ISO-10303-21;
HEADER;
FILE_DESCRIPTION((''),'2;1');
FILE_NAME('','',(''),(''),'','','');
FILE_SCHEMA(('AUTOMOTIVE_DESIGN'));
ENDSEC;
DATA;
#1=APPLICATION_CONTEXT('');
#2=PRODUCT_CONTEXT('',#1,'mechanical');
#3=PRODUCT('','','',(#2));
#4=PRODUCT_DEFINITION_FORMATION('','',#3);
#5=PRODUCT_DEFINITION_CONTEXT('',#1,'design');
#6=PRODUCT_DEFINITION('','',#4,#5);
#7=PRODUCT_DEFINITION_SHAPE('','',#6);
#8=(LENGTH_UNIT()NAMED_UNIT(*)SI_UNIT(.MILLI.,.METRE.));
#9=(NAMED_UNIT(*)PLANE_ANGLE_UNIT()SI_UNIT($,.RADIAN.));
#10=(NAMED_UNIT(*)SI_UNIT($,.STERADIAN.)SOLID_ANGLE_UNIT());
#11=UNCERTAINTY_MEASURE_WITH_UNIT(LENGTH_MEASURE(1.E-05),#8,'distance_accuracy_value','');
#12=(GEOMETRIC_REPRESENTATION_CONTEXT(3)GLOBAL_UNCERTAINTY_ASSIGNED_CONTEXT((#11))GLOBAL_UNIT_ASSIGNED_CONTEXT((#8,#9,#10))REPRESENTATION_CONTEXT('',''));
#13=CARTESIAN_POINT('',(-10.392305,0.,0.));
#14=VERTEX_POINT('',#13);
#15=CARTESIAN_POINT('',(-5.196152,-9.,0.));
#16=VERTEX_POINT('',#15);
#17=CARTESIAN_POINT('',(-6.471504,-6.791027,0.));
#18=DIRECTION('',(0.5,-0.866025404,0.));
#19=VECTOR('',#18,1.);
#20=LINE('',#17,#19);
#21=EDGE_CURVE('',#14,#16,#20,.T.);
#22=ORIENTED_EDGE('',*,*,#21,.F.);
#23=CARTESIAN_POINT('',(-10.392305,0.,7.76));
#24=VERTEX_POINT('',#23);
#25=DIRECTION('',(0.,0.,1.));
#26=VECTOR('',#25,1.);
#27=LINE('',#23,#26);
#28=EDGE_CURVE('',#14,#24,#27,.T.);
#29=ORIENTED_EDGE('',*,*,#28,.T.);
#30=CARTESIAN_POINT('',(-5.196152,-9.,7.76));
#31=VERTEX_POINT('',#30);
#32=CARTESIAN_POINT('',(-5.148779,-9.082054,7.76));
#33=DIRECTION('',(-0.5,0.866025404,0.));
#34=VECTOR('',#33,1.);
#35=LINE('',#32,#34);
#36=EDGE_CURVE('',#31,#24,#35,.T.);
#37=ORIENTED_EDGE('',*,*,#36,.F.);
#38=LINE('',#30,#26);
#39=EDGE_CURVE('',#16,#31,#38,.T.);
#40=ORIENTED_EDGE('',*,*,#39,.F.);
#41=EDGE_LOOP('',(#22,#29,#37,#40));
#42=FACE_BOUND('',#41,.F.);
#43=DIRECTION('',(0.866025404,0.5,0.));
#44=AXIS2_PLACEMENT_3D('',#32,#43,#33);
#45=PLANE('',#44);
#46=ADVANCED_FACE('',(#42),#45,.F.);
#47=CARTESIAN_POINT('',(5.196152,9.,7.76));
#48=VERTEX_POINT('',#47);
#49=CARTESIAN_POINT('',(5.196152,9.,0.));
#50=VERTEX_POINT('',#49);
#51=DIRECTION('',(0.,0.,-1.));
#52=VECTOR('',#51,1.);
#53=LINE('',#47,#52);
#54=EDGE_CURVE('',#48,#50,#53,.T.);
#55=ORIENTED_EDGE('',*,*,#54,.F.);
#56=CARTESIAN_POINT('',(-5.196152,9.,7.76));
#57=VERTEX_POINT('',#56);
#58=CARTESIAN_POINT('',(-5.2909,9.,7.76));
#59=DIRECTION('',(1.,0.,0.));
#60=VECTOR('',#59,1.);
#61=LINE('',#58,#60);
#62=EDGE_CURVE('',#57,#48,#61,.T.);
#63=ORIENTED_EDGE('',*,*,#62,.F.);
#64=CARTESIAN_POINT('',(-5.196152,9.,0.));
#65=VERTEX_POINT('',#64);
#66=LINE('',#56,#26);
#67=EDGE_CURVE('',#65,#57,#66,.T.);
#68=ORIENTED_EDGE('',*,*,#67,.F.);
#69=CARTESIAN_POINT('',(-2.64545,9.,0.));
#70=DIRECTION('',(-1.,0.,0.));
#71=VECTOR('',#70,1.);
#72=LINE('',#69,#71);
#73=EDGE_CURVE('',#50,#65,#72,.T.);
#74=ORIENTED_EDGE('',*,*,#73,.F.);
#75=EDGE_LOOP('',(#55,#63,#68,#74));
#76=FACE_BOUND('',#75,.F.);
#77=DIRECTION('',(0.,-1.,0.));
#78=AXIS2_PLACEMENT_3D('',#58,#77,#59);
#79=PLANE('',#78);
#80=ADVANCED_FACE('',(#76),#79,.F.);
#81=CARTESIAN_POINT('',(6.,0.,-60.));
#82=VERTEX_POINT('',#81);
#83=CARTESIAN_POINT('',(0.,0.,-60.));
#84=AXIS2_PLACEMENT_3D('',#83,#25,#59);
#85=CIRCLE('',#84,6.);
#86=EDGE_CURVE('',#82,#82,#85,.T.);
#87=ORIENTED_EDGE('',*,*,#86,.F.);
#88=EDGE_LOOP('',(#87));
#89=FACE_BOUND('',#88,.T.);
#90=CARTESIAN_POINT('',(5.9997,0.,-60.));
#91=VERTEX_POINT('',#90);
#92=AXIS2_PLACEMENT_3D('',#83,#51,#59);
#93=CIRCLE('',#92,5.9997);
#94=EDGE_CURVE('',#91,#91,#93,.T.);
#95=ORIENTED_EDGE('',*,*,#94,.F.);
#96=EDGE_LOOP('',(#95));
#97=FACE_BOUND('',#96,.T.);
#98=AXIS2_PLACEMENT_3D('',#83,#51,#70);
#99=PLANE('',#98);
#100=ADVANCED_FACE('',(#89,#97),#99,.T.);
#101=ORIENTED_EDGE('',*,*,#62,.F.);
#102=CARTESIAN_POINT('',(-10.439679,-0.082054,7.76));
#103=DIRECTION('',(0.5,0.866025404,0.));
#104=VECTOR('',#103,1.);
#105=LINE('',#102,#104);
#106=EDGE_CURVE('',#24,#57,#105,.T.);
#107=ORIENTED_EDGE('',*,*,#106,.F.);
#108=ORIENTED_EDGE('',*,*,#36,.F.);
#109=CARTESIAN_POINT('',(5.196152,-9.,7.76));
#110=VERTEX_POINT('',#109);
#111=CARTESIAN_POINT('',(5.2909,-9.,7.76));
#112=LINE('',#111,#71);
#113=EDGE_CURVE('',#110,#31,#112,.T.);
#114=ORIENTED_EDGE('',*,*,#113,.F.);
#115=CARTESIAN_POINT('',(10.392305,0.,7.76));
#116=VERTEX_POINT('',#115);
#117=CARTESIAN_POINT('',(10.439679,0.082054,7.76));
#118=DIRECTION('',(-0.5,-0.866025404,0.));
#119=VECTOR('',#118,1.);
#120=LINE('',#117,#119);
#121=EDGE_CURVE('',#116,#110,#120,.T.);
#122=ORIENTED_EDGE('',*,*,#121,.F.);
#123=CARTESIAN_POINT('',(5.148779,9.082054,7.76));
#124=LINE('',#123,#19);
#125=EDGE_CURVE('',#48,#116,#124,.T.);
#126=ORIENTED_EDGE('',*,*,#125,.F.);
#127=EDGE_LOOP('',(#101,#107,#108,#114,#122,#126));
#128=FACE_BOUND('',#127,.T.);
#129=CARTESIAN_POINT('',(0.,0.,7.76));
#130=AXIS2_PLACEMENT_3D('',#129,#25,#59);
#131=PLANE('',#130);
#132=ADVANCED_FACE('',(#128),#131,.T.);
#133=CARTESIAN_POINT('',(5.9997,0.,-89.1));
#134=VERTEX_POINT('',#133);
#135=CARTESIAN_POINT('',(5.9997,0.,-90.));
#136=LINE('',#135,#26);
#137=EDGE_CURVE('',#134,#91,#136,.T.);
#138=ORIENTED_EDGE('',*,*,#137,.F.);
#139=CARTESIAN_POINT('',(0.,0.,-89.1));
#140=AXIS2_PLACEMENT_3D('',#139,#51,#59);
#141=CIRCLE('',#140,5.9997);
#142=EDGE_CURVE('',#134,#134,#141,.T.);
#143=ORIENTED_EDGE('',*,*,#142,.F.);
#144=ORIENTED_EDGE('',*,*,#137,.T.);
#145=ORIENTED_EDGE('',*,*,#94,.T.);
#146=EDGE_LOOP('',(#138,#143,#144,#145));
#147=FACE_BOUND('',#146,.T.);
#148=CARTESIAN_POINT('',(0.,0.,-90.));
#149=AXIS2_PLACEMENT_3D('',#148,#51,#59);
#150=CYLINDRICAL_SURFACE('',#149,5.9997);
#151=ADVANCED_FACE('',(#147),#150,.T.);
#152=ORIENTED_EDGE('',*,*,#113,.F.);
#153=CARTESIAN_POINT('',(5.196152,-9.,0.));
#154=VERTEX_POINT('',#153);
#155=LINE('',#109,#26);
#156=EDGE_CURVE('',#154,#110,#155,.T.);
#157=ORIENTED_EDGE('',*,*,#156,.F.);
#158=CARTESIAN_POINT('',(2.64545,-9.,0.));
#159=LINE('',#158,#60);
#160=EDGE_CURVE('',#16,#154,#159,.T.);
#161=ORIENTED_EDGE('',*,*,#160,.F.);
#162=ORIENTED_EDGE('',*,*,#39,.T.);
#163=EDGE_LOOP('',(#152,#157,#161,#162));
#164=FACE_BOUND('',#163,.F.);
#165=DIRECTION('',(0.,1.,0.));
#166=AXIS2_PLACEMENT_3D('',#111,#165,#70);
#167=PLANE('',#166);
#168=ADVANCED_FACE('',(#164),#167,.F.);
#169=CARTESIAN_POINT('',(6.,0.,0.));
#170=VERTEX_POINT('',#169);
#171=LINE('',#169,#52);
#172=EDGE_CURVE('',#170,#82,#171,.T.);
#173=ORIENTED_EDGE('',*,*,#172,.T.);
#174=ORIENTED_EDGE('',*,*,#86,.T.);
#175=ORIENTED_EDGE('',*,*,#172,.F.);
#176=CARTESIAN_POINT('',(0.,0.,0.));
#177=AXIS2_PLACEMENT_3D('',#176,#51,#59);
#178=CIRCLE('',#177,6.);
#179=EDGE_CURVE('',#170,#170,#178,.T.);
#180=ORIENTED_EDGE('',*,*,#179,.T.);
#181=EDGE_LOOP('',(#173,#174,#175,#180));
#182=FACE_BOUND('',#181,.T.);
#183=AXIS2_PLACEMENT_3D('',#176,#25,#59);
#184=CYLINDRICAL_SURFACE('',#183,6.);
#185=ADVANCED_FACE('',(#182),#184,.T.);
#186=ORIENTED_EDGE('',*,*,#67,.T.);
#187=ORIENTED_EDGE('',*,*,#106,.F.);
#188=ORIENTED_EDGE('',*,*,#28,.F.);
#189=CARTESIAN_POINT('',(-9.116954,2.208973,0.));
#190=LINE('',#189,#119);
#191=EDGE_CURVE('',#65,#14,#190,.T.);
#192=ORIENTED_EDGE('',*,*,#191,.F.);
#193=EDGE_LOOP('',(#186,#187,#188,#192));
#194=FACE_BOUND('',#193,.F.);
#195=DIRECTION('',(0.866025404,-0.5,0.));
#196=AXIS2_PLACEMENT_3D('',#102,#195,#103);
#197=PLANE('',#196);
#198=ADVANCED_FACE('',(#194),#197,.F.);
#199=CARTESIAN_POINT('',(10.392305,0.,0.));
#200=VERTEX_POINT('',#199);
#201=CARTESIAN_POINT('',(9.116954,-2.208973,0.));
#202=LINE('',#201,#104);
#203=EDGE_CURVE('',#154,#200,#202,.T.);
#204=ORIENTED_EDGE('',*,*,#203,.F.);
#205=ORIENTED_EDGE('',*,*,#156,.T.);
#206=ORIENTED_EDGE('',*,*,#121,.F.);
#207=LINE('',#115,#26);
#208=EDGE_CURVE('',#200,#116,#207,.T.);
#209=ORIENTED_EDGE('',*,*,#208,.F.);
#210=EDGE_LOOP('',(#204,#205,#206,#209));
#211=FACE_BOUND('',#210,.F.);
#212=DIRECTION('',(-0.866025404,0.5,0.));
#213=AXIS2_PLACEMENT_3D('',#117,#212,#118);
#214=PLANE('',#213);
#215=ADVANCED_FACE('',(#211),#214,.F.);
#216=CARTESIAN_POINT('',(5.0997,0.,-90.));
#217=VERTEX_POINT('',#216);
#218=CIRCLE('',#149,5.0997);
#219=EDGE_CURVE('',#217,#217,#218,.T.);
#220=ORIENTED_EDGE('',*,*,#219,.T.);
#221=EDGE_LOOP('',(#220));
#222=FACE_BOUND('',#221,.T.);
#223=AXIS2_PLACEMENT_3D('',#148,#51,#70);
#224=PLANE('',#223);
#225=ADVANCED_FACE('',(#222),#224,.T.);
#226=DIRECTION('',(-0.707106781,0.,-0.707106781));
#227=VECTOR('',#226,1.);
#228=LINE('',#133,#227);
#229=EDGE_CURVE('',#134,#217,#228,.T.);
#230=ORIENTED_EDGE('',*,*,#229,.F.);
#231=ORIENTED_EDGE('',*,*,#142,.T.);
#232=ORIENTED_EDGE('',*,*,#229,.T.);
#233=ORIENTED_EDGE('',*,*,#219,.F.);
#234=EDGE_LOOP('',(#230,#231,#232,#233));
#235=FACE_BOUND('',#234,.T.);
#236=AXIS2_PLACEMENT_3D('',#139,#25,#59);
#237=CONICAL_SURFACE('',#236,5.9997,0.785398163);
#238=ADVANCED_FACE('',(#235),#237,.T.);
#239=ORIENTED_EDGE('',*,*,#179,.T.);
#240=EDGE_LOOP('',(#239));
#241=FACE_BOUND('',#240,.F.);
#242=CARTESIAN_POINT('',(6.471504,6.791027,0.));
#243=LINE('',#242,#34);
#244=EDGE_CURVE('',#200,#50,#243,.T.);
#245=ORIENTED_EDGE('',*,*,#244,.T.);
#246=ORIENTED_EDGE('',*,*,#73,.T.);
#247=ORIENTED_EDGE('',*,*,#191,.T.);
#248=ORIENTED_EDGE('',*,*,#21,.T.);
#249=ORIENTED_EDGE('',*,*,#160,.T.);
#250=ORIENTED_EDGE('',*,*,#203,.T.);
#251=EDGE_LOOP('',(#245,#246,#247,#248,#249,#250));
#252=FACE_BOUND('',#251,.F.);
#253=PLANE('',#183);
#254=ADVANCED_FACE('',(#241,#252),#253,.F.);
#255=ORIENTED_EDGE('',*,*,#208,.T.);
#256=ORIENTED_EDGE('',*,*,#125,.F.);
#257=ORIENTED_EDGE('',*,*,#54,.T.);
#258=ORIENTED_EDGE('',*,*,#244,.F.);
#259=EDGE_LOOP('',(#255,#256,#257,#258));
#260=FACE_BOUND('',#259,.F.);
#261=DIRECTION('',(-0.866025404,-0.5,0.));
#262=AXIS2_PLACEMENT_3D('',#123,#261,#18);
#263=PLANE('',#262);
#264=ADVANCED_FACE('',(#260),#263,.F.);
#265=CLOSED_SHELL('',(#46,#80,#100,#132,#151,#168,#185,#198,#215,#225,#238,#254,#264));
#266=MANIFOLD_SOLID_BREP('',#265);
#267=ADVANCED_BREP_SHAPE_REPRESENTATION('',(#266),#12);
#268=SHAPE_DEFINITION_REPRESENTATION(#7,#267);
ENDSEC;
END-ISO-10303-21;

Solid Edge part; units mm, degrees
sketch "Sketch1" plane through (0, 0, 0) normal (0, 0, 1) x (1, 0, 0)
  circle A0 centre (0, 0) radius 10.44
  dimension "D1" = 20.88
extrude "Protrusion1" add sketch "Sketch1" along normal blind 7.76
sketch "Sketch2" plane through (0, 0, 0) normal (0, 0, -1) x (1, 0, 0)
  circle A0 centre (0, 0) radius 6
extrude "Protrusion2" add sketch "Sketch2" along normal blind 90
sketch "Sketch3" plane through (0, 0, -90) normal (0, 0, -1) x (1, 0, 0)
  circle A0 centre (0, 0) radius 5.9997
extrude "Cutout1" cut sketch "Sketch3" against normal blind 30 flip side to cut
chamfer "Chamfer_1" distance 0.9 angle 45 1 edges at (-5.9997, 0, -90)
sketch "Sketch4" plane through (0, 0, 7.76) normal (0, 0, 1) x (1, 0, 0)
  line L0 (-5.2909, 9) -> (5.2909, 9)
  dimension "D1" = 18
extrude "Cutout2" cut sketch "Sketch4" against normal up to next material side at (0, 9.05, 7.76)
pattern_circular "Pattern1" count 6 over 360 about axis through (0, 0, 7.76) along (0, 0, 1) of "Cutout2"
properties part number "117984"
